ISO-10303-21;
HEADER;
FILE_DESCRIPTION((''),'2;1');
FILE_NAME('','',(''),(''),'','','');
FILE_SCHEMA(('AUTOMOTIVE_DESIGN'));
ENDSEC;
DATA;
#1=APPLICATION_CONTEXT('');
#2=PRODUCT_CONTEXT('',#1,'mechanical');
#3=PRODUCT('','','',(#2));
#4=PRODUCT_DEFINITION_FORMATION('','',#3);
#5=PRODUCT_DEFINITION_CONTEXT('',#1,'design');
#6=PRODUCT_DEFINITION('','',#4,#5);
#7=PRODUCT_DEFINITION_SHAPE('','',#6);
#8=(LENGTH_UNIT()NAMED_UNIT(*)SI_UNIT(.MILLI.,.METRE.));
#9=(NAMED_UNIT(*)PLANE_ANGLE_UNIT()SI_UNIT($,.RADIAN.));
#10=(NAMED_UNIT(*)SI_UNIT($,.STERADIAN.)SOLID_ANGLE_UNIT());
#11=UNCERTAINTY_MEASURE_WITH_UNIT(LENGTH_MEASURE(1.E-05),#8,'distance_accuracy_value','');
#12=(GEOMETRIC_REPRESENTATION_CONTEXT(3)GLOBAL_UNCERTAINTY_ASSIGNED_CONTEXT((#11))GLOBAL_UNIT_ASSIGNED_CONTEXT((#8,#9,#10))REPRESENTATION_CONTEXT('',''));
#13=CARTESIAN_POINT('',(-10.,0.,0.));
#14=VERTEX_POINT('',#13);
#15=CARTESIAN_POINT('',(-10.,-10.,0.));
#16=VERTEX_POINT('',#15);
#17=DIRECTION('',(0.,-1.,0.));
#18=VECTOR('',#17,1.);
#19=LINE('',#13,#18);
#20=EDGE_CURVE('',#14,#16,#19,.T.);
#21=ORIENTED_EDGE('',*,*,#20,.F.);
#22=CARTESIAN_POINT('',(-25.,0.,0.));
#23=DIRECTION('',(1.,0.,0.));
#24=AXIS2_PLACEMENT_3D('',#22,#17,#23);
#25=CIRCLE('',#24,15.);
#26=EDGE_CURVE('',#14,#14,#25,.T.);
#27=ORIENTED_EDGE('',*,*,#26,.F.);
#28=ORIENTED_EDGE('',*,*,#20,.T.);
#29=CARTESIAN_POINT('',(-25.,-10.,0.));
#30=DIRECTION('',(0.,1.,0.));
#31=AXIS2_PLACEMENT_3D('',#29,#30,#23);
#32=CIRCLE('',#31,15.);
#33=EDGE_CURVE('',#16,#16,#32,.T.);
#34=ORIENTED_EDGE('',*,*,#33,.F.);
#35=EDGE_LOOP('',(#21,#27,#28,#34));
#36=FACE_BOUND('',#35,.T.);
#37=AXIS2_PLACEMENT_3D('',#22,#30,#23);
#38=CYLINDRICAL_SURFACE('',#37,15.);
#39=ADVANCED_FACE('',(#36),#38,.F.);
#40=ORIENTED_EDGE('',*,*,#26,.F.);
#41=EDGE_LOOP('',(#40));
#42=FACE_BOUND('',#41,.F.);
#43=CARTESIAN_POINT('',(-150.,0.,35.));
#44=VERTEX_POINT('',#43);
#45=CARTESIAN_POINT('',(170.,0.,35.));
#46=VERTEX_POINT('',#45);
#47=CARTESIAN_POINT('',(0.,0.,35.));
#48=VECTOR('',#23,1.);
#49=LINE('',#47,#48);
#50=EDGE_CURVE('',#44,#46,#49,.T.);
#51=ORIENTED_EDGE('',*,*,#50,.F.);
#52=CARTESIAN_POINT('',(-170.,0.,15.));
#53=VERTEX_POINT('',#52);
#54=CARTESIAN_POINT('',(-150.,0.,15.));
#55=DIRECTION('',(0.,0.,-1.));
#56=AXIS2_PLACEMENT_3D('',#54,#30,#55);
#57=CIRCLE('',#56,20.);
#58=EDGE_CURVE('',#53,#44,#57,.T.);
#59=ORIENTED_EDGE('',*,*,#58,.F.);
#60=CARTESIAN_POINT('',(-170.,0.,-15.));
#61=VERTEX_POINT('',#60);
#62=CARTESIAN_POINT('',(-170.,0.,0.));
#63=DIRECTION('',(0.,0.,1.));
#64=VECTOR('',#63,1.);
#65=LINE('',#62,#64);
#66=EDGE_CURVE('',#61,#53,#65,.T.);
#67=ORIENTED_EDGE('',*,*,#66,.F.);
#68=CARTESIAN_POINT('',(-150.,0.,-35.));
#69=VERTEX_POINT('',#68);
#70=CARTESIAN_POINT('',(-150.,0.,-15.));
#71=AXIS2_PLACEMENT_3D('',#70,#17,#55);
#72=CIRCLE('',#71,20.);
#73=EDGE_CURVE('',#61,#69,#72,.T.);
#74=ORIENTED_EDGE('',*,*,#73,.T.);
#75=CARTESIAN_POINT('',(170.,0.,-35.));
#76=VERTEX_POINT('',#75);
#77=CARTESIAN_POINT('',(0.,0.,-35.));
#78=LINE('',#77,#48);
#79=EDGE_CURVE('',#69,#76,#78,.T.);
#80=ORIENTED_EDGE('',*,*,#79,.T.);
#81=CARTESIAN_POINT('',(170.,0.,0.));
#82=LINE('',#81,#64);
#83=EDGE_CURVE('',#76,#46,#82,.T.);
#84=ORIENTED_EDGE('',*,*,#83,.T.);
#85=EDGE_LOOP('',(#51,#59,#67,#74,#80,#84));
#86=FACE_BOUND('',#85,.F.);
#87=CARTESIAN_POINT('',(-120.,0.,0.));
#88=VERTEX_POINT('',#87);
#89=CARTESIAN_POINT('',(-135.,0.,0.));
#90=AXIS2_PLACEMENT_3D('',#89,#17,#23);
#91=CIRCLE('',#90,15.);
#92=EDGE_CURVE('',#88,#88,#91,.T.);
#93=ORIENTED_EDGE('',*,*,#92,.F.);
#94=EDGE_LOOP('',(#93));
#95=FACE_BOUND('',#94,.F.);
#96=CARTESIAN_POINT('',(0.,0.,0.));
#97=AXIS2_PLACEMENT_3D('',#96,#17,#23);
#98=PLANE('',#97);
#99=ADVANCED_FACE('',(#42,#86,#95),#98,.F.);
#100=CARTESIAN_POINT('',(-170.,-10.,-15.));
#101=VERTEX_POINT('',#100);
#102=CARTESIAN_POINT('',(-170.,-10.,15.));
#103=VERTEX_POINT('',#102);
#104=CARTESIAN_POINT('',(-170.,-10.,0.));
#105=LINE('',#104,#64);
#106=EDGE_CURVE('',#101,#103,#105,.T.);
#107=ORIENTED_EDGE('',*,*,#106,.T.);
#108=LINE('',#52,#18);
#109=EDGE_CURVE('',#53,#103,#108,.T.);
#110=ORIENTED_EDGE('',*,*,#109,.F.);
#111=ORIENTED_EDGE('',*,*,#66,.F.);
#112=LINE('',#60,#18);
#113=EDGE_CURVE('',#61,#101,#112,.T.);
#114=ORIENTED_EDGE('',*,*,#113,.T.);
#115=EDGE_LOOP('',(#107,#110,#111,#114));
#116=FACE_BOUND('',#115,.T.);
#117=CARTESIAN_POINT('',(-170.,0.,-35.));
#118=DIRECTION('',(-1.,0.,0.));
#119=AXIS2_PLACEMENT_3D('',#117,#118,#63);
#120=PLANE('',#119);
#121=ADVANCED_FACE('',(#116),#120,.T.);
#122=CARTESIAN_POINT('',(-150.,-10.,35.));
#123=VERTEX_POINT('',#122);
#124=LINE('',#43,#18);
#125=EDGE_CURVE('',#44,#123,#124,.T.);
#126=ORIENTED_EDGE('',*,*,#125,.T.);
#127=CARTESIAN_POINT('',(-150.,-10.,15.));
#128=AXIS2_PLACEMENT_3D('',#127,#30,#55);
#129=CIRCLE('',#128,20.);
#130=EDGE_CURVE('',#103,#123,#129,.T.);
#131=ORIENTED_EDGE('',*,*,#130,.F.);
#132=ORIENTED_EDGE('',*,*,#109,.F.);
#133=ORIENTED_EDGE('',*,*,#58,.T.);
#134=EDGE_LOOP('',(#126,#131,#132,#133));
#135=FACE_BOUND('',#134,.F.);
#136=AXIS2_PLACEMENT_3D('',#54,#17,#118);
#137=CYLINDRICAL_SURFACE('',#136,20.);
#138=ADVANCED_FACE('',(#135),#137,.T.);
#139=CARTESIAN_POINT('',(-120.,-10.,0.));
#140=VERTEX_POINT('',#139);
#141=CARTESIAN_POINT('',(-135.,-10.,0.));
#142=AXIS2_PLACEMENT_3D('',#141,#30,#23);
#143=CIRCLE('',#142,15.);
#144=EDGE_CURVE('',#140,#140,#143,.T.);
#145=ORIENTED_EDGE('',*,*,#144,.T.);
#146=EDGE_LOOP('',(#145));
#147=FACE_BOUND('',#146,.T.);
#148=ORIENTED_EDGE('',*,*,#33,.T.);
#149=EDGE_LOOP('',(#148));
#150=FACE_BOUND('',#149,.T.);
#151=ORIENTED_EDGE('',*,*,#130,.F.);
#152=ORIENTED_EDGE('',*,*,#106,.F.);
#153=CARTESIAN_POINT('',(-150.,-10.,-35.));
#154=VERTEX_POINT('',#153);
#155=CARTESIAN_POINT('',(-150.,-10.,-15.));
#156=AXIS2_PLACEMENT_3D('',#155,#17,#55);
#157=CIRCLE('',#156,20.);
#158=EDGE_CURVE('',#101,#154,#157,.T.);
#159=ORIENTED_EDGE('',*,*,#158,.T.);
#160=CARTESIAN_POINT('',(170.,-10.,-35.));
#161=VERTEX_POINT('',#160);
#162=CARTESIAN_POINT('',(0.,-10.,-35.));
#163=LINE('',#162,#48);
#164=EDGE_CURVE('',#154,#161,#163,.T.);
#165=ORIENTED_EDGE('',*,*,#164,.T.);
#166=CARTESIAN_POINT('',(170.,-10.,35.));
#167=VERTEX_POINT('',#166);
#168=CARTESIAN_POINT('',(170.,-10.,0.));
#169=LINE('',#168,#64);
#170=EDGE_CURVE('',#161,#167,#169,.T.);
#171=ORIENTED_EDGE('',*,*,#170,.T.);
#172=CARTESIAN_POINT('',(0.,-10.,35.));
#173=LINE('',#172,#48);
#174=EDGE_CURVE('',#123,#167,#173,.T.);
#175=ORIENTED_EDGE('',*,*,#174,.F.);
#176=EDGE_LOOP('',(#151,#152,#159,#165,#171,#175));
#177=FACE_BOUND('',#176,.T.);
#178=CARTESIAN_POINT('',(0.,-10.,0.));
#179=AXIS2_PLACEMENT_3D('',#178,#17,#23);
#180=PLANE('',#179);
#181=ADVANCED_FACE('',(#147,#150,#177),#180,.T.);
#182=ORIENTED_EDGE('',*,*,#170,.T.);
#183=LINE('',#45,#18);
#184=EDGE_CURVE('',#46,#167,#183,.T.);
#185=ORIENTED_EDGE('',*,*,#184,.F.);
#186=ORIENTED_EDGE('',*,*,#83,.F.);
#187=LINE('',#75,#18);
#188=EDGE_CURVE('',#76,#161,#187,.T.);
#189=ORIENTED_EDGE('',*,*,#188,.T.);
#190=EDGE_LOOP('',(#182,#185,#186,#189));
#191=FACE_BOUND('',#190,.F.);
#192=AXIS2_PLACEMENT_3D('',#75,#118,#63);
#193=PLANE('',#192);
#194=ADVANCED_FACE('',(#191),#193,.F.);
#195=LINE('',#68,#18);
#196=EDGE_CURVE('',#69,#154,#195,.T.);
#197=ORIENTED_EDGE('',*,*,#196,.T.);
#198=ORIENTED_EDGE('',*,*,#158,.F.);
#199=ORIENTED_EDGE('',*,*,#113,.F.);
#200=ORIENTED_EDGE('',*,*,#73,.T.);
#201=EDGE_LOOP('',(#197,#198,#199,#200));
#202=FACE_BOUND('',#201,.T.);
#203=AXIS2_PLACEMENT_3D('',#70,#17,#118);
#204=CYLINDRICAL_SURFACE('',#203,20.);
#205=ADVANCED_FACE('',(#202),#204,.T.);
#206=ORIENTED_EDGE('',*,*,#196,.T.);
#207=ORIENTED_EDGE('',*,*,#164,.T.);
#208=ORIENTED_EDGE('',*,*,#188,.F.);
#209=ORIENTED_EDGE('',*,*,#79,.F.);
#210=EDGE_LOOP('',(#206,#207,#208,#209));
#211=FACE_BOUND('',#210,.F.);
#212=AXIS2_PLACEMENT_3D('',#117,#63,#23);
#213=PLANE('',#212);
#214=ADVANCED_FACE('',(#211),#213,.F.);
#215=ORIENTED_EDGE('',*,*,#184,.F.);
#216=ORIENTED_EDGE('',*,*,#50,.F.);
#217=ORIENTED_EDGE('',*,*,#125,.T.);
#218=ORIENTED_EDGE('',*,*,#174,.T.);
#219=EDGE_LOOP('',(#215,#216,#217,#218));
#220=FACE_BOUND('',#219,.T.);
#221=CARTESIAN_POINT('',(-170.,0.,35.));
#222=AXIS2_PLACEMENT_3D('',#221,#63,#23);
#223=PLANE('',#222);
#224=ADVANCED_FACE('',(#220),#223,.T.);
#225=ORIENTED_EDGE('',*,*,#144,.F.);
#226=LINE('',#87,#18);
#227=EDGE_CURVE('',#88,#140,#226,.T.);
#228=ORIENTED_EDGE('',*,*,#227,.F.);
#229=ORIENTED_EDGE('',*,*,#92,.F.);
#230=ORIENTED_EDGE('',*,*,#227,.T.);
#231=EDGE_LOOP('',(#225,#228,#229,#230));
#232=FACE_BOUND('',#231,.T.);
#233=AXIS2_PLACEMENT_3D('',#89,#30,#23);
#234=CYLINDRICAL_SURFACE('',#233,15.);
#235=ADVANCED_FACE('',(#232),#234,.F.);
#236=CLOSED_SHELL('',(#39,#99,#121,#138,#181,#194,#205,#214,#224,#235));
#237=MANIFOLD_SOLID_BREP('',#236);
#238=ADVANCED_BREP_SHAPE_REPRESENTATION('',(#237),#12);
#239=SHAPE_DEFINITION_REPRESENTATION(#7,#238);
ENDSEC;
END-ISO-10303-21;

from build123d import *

# Parameters (mm, degrees)
F0_W          = 340
F0_H          = 70
F1_DEPTH      = 10
F2_R          = 20
F3_R          = 15
F4_DEPTH      = 353
F4_DEPTH_BACK = 25


# Not quite as in the source:
# - an extrude ends at something that could not be found from the text; its depth is read off the source's solid


with BuildPart() as f1:
    # F0 (on Front) → F1 (new body)
    with BuildSketch(Plane.XZ):
        Rectangle(F0_W, F0_H)
    extrude(amount=F1_DEPTH)

    # F2
    f2_edges = [f1.edges().sort_by_distance(p)[0] for p in [
        (-170, -5, 35),
        (-170, -5, -35),
    ]]
    fillet(f2_edges, radius=F2_R)

    # F3 (on Front) → F4 (cut, two sides)
    with BuildSketch(Plane.XZ) as f4_sk:
        with Locations((-135, 0)):
            Circle(F3_R)
        with Locations((-25, 0)):
            Circle(F3_R)
    extrude(amount=-F4_DEPTH, mode=Mode.SUBTRACT)
    extrude(f4_sk.sketch, amount=F4_DEPTH_BACK, mode=Mode.SUBTRACT)


solid = f1.part
